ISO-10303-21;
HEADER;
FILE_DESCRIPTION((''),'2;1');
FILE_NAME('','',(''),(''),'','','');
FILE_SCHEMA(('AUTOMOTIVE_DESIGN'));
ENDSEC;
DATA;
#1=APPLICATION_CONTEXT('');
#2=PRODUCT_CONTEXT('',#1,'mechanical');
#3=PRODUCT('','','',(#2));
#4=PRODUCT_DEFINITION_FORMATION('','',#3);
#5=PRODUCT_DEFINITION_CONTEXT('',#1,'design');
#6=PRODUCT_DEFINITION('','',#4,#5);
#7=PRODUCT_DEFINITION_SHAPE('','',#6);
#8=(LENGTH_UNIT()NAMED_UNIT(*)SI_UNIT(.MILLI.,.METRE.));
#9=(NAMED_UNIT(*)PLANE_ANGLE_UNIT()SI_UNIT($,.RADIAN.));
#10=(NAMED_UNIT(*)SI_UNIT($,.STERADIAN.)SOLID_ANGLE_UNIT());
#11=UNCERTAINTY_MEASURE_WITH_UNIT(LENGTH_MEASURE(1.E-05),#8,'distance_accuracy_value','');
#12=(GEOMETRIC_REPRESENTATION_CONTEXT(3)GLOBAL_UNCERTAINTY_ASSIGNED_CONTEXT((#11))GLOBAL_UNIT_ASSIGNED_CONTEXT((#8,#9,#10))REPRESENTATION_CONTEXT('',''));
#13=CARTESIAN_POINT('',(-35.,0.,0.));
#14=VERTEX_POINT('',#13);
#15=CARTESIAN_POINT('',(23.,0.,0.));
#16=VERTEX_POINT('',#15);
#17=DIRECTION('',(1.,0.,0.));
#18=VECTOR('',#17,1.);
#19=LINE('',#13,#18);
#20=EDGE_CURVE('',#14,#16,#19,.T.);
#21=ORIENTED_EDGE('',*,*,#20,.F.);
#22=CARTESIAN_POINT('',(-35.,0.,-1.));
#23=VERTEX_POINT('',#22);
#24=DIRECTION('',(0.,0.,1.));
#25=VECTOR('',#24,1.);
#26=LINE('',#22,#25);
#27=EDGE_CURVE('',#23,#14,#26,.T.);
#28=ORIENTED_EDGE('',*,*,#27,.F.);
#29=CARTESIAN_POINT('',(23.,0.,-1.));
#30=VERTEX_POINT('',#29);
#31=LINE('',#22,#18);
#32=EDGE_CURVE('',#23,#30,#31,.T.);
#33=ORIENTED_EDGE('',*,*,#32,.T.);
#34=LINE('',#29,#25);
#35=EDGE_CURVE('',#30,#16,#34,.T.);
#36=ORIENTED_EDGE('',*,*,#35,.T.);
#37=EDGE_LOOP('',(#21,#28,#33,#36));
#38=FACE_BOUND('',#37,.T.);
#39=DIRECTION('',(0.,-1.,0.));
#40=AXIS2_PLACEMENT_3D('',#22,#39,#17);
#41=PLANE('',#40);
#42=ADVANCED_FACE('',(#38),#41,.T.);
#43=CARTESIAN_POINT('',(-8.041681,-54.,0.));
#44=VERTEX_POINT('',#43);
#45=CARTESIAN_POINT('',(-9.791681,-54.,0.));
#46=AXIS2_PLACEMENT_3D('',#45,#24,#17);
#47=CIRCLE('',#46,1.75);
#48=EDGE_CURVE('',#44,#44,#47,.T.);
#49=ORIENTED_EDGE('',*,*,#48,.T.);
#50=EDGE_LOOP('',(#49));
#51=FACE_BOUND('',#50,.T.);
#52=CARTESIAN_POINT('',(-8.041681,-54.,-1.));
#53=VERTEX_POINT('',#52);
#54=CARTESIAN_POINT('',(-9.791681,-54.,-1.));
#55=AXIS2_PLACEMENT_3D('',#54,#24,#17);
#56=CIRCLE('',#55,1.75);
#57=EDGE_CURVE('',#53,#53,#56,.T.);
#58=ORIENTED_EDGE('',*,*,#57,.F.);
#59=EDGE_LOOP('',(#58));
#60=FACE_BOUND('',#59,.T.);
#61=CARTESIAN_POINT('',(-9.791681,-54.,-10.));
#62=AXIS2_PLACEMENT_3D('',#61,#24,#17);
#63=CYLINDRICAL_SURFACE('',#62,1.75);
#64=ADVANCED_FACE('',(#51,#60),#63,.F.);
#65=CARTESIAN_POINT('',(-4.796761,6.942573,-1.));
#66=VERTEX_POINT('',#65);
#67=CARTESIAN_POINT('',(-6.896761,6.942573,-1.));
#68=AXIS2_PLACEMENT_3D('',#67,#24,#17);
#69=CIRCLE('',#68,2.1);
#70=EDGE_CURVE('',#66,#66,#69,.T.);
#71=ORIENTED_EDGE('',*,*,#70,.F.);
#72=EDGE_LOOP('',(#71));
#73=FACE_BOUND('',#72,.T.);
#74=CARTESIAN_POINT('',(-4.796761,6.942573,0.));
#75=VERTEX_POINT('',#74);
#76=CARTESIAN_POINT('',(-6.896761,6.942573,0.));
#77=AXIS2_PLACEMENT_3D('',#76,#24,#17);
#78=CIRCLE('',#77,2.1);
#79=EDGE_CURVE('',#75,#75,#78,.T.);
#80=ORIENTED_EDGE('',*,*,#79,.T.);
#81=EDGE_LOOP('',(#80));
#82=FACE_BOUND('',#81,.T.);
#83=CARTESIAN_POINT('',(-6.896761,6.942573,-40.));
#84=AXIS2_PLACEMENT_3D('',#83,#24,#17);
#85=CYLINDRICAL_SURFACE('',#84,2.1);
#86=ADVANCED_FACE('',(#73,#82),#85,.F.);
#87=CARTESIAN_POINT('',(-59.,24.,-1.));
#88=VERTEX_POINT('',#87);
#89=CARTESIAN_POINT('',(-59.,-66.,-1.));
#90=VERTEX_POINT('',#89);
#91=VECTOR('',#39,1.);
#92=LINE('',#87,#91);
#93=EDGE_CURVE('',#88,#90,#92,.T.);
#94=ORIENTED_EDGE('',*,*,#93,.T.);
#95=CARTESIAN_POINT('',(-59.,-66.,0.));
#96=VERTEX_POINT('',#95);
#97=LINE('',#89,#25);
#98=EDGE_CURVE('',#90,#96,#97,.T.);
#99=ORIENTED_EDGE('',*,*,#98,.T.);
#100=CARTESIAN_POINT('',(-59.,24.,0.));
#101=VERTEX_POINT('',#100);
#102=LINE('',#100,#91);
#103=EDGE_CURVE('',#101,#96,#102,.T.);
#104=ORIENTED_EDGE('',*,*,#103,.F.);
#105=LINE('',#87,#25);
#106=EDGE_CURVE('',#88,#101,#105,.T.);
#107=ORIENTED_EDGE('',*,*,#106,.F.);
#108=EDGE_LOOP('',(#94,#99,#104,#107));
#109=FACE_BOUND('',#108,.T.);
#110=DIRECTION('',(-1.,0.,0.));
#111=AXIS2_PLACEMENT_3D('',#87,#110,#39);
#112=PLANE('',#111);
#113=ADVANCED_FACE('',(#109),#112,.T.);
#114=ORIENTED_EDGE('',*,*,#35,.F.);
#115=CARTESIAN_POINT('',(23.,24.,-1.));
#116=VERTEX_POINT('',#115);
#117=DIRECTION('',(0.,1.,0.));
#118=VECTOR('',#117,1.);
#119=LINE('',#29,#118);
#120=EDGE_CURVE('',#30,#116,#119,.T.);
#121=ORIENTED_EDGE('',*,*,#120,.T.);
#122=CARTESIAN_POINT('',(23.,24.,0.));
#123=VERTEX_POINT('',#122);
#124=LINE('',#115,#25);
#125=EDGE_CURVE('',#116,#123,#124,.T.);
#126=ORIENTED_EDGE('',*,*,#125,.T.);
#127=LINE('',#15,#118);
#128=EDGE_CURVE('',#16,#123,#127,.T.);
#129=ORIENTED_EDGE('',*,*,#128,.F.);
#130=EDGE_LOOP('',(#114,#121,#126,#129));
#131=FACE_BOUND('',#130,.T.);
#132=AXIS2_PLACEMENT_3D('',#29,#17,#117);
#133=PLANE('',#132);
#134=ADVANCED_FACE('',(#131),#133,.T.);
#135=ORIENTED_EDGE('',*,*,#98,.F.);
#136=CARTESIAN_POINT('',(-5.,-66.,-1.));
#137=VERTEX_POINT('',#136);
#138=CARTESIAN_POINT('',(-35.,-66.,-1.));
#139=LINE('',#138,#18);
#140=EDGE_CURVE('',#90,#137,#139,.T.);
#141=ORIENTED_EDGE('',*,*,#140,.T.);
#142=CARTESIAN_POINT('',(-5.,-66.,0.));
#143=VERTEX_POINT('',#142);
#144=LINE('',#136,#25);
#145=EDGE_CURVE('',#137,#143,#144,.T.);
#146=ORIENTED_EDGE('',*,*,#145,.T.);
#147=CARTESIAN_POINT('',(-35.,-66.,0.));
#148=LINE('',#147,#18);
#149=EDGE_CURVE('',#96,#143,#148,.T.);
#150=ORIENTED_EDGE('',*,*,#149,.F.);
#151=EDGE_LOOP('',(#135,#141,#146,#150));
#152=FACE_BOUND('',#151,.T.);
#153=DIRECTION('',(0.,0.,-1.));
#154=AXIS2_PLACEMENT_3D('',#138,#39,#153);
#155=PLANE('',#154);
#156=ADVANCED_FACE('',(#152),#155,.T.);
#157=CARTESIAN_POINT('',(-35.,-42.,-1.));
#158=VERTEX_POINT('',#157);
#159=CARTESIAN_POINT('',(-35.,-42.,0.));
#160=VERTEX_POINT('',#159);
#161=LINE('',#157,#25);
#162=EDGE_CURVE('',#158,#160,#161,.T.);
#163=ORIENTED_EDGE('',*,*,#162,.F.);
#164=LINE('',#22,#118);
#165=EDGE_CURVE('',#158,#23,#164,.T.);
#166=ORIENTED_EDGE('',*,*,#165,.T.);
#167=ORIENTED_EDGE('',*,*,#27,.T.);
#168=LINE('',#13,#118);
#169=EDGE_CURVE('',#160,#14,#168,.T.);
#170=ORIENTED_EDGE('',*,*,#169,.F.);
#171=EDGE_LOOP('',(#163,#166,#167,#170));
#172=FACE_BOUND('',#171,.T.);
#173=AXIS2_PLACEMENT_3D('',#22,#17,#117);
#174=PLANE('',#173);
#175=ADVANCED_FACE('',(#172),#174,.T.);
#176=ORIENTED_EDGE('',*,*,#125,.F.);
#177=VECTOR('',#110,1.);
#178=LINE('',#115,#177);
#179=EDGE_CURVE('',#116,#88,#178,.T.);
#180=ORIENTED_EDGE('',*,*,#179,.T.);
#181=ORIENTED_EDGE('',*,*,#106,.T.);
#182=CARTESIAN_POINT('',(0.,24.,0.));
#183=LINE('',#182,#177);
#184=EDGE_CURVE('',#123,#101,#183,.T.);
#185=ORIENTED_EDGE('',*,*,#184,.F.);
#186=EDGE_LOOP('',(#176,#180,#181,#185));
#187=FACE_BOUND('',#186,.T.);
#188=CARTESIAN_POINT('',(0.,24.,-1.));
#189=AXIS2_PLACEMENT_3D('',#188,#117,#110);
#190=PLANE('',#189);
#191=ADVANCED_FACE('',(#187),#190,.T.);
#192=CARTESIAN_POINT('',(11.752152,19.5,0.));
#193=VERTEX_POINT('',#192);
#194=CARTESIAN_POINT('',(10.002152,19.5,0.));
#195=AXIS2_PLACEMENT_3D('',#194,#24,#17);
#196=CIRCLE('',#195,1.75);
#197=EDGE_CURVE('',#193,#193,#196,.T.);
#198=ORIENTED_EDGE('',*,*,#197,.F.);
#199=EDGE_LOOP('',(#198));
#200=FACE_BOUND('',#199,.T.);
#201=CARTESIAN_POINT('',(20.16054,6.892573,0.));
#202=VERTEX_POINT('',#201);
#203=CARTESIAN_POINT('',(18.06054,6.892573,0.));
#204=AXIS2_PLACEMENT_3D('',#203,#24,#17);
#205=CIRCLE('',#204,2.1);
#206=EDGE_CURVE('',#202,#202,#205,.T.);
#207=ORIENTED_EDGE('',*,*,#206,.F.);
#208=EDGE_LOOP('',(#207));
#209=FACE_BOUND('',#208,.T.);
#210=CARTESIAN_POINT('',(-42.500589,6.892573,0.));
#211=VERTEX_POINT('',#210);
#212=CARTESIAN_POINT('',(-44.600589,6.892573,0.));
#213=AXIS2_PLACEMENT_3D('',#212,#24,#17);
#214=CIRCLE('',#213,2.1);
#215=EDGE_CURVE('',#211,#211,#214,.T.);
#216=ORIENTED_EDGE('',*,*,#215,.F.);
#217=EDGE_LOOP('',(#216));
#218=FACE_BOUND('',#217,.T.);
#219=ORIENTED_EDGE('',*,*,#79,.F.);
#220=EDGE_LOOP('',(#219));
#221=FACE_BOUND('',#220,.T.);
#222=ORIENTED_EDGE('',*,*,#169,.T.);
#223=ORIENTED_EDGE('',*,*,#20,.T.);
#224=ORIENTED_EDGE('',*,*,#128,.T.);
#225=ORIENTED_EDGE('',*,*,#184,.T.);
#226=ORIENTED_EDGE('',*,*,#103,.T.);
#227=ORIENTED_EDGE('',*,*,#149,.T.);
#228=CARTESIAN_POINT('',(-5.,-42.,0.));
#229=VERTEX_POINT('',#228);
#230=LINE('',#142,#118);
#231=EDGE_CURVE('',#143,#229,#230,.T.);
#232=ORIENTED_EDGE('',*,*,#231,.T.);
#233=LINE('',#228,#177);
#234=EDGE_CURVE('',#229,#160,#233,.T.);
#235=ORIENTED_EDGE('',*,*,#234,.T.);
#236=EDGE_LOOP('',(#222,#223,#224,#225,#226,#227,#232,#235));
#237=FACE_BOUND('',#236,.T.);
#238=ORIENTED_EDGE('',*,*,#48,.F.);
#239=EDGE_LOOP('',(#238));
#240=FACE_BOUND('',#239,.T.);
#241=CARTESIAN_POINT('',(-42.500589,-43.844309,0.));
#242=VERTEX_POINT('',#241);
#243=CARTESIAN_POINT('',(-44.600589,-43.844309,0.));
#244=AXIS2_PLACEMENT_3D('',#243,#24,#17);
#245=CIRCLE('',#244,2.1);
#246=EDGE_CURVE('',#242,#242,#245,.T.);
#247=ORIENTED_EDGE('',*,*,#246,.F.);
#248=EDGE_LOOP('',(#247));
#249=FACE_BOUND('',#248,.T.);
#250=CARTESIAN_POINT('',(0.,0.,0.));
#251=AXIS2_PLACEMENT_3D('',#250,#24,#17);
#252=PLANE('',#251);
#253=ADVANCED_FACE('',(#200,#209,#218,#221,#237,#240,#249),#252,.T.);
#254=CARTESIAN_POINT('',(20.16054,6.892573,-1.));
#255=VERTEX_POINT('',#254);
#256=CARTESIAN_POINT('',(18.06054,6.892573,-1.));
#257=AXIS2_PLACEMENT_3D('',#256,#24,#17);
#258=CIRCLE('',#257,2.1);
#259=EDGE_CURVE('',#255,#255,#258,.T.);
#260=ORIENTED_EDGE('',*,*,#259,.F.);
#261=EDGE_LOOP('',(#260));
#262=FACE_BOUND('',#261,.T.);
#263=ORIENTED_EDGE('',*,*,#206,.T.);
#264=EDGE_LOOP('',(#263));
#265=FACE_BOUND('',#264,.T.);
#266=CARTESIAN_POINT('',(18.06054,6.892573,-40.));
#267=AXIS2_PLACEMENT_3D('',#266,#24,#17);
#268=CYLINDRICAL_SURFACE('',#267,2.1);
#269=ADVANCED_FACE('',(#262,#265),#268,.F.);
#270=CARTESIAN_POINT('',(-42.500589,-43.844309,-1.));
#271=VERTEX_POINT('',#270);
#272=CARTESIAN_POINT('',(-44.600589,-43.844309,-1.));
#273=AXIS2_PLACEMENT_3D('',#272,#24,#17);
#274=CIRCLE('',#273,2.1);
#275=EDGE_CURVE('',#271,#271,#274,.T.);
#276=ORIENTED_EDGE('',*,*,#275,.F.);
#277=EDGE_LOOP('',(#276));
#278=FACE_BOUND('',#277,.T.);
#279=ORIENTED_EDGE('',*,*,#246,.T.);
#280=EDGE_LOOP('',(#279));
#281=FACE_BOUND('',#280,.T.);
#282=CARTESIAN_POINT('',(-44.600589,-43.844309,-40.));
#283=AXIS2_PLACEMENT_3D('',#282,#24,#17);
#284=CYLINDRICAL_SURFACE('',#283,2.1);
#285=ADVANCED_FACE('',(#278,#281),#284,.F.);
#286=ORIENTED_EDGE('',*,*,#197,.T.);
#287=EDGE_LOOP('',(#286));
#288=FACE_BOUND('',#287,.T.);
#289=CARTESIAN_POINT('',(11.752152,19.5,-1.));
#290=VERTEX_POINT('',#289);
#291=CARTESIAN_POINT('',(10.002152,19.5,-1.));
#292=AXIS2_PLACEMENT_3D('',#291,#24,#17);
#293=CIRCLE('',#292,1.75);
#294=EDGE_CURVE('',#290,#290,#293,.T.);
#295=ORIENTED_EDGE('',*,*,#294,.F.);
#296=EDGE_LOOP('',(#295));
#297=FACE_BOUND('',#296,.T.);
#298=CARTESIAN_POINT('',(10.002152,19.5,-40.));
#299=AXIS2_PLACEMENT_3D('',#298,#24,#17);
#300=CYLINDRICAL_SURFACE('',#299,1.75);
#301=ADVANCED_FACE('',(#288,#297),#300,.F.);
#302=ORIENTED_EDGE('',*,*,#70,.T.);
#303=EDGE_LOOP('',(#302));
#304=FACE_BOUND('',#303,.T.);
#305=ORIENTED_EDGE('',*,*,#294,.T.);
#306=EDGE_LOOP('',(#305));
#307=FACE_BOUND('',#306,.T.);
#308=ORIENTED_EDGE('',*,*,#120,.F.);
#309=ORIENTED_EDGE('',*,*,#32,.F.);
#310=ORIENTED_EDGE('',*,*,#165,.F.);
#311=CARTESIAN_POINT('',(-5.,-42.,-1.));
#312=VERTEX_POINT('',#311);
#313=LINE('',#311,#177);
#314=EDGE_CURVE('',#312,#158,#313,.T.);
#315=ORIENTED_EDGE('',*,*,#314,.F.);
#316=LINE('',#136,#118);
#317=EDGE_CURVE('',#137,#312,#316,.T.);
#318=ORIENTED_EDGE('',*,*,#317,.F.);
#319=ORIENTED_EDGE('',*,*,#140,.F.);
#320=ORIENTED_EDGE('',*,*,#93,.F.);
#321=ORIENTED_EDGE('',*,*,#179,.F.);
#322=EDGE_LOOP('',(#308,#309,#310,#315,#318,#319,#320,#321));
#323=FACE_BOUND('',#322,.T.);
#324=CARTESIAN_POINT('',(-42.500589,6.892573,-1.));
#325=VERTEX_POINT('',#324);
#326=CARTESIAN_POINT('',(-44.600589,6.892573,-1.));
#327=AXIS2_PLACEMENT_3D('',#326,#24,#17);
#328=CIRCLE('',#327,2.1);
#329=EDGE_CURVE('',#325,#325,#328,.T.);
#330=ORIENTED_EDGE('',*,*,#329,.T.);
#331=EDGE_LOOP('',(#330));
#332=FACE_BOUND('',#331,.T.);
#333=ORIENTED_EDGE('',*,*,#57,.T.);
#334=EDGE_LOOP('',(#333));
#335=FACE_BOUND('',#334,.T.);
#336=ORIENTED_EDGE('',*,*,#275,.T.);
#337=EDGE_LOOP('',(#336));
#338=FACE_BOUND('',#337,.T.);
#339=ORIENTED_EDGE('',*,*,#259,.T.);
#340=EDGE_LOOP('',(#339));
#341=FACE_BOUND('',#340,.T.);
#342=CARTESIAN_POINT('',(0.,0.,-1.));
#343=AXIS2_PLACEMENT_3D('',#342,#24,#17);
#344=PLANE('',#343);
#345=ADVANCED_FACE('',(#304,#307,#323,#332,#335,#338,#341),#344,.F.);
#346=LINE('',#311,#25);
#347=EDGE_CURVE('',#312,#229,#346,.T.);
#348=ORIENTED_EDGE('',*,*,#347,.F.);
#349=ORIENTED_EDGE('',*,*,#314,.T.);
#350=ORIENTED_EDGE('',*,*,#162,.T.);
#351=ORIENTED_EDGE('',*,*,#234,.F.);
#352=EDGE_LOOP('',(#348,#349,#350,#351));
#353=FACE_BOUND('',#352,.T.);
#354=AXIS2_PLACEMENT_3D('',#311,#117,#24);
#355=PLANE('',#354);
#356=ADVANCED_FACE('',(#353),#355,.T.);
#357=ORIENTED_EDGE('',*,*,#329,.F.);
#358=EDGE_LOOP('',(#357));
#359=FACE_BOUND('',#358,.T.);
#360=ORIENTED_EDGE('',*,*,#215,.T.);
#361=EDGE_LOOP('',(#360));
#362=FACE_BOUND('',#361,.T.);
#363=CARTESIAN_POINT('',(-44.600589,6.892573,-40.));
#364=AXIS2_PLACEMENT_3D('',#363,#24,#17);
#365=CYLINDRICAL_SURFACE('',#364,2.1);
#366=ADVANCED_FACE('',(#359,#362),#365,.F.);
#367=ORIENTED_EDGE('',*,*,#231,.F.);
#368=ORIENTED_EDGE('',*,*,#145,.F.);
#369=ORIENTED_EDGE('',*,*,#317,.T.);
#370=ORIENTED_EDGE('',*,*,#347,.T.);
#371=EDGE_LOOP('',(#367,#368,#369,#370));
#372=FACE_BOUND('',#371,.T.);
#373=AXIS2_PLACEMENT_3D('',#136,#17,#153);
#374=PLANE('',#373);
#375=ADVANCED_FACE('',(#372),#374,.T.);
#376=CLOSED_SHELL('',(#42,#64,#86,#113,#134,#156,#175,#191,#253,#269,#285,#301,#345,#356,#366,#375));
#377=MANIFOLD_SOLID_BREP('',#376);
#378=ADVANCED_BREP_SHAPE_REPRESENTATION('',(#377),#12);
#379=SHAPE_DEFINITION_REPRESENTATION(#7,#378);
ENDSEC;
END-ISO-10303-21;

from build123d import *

# Parameters (mm, degrees)
BASE_FLANGE1_DEPTH = 1
SKETCH3_R          = 2.1
SKETCH3_R_2        = 1.75
CUT_EXTRUDE1_DEPTH = 40
SKETCH4_R          = 1.75
CUT_EXTRUDE2_DEPTH = 10


# Sheet-metal steps are written as plain solids
with BuildPart() as part:
    # Sketch1 → Base-Flange1 (new body)
    with BuildSketch(Plane.XY):
        Polygon((0, 24), (-59, 24), (-59, -66), (-35, -66), (-5, -66), (-5, -42), (-35, -42), (-35, 0), (23, 0), (23, 24), align=None)
    extrude(amount=-BASE_FLANGE1_DEPTH)

    # Sketch3 → Cut-Extrude1 (cut)
    with BuildSketch(Plane.XY):
        with Locations((-44.600589414, -43.844308668)):
            Circle(SKETCH3_R)
        with Locations((-44.600589414, 6.892572586)):
            Circle(SKETCH3_R)
        with Locations((-6.896760866, 6.942572586)):
            Circle(SKETCH3_R)
        with Locations((18.060540453, 6.892572586)):
            Circle(SKETCH3_R)
        with Locations((10.002152137, 19.5)):
            Circle(SKETCH3_R_2)
    extrude(amount=-CUT_EXTRUDE1_DEPTH, mode=Mode.SUBTRACT)

    # Sketch4 → Cut-Extrude2 (cut)
    with BuildSketch(Plane.XY):
        with Locations((-9.791680506, -54)):
            Circle(SKETCH4_R)
    extrude(amount=-CUT_EXTRUDE2_DEPTH, mode=Mode.SUBTRACT)


solid = part.part
